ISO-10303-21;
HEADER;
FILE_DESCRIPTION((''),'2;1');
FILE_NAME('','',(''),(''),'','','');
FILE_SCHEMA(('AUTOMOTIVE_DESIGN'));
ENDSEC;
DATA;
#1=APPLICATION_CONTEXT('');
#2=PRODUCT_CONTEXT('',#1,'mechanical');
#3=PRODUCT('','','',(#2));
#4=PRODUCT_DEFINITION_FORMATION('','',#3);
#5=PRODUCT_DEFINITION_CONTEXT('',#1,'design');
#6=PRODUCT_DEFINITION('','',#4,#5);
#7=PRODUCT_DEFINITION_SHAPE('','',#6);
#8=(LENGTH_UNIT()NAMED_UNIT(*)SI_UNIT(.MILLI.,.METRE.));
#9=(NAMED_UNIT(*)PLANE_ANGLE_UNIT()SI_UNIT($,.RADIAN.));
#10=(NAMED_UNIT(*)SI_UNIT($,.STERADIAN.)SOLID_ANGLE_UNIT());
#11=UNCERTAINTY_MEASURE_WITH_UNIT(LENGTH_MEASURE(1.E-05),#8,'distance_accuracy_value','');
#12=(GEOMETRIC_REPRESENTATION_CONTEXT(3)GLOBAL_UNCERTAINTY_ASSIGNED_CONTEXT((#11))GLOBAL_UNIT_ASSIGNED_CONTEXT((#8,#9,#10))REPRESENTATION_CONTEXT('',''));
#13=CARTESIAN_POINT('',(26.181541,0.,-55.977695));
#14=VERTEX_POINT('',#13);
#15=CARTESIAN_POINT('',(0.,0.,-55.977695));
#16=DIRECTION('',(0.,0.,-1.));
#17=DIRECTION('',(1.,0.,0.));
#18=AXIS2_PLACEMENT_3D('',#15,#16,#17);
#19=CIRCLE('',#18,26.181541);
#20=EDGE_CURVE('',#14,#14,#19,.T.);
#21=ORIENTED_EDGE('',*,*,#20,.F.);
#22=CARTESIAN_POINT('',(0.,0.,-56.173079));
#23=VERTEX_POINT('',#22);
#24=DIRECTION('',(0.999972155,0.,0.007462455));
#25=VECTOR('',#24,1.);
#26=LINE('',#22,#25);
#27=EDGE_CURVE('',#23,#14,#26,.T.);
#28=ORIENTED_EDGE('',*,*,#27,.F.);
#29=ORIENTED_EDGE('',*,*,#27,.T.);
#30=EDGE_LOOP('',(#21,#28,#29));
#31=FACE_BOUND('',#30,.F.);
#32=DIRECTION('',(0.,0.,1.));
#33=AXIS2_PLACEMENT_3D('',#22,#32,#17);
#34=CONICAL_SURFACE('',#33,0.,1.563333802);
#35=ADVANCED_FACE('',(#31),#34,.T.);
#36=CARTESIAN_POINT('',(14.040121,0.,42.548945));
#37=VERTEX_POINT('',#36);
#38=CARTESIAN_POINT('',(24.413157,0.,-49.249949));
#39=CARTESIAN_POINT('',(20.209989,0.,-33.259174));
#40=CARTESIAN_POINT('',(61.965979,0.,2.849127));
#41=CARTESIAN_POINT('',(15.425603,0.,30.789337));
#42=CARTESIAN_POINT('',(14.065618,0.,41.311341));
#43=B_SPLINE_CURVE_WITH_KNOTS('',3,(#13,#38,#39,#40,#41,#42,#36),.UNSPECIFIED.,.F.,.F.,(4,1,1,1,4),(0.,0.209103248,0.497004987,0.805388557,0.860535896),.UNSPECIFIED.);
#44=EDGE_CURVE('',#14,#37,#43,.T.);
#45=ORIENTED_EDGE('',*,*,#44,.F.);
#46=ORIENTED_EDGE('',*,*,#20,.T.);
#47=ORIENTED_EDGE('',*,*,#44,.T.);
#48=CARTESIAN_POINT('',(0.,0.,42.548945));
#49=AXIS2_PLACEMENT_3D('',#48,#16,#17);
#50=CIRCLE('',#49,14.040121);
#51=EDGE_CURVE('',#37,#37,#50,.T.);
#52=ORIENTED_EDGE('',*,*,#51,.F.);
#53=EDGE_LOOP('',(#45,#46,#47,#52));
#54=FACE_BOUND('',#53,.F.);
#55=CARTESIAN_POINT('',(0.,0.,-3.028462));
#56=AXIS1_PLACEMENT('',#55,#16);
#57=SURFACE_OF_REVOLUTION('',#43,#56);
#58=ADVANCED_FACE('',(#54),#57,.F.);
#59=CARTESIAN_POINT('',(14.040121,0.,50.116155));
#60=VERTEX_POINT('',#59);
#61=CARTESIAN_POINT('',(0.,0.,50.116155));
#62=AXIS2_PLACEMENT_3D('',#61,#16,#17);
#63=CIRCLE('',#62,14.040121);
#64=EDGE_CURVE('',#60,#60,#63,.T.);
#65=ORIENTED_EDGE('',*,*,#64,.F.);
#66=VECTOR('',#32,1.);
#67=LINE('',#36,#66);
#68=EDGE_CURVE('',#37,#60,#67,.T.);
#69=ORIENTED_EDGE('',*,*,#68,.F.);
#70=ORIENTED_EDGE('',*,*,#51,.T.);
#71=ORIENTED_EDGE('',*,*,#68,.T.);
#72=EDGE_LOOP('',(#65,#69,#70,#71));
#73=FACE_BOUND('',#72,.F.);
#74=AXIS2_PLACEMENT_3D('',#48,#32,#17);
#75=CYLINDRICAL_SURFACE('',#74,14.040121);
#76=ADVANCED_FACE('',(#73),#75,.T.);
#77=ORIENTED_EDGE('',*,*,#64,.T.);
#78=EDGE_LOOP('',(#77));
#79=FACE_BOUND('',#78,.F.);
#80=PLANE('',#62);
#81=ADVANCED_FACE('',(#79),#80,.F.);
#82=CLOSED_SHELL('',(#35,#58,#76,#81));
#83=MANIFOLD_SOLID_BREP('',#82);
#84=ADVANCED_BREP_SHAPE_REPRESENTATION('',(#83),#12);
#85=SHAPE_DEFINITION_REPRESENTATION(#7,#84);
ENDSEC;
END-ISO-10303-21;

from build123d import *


with BuildPart() as f1:
    # F0 (on Front) → F1 (revolve)
    with BuildSketch(Plane.XZ):
        with BuildLine():
            Line((14.0401206778, 50.1161552966), (0, 50.1161552966))
            Line((0, 50.1161552966), (0, -56.1730787158))
            Line((0, -56.1730787158), (26.1815413833, -55.9776946902))
            add(Edge.make_bspline(
                [(26.1815413833, -55.9776946902), (24.4131565466, -49.2499493412), (20.209988544, -33.2591743733), (61.9659793922, 2.8491265853), (15.4256031143, 30.789337421), (14.0656178298, 41.3113405605), (14.0401206778, 42.5489448246)],
                knots=[0, 0, 0, 0, 0.2091032484, 0.4970049872, 0.8053885573, 0.8605358957, 0.8605358957, 0.8605358957, 0.8605358957], degree=3))
            add(Edge.make_bspline(
                [(14.0401206778, 42.5489448246), (14.036067117, 42.7457002938), (14.0365835548, 42.9333928057), (14.0401206778, 43.111050345)],
                knots=[0.8605358957, 0.8605358957, 0.8605358957, 0.8605358957, 0.8693032705, 0.8693032705, 0.8693032705, 0.8693032705], degree=3))
            Line((14.0401206778, 43.111050345), (14.0401206778, 45.0370277254))
            Line((14.0401206778, 45.0370277254), (14.0401206778, 50.1161552966))
        make_face()
        with BuildLine():
            add(Edge.make_bspline(
                [(14.0401206778, 42.5489448246), (14.036067117, 42.7457002938), (14.0365835548, 42.9333928057), (14.0401206778, 43.111050345)],
                knots=[0.8605358957, 0.8605358957, 0.8605358957, 0.8605358957, 0.8693032705, 0.8693032705, 0.8693032705, 0.8693032705], degree=3))
            Line((14.0401206778, 42.5489448246), (14.0401206778, 43.111050345))
        make_face()
    revolve(axis=Axis((0, 0, -3.0284617096), (0, 0, -1)))


solid = f1.part
